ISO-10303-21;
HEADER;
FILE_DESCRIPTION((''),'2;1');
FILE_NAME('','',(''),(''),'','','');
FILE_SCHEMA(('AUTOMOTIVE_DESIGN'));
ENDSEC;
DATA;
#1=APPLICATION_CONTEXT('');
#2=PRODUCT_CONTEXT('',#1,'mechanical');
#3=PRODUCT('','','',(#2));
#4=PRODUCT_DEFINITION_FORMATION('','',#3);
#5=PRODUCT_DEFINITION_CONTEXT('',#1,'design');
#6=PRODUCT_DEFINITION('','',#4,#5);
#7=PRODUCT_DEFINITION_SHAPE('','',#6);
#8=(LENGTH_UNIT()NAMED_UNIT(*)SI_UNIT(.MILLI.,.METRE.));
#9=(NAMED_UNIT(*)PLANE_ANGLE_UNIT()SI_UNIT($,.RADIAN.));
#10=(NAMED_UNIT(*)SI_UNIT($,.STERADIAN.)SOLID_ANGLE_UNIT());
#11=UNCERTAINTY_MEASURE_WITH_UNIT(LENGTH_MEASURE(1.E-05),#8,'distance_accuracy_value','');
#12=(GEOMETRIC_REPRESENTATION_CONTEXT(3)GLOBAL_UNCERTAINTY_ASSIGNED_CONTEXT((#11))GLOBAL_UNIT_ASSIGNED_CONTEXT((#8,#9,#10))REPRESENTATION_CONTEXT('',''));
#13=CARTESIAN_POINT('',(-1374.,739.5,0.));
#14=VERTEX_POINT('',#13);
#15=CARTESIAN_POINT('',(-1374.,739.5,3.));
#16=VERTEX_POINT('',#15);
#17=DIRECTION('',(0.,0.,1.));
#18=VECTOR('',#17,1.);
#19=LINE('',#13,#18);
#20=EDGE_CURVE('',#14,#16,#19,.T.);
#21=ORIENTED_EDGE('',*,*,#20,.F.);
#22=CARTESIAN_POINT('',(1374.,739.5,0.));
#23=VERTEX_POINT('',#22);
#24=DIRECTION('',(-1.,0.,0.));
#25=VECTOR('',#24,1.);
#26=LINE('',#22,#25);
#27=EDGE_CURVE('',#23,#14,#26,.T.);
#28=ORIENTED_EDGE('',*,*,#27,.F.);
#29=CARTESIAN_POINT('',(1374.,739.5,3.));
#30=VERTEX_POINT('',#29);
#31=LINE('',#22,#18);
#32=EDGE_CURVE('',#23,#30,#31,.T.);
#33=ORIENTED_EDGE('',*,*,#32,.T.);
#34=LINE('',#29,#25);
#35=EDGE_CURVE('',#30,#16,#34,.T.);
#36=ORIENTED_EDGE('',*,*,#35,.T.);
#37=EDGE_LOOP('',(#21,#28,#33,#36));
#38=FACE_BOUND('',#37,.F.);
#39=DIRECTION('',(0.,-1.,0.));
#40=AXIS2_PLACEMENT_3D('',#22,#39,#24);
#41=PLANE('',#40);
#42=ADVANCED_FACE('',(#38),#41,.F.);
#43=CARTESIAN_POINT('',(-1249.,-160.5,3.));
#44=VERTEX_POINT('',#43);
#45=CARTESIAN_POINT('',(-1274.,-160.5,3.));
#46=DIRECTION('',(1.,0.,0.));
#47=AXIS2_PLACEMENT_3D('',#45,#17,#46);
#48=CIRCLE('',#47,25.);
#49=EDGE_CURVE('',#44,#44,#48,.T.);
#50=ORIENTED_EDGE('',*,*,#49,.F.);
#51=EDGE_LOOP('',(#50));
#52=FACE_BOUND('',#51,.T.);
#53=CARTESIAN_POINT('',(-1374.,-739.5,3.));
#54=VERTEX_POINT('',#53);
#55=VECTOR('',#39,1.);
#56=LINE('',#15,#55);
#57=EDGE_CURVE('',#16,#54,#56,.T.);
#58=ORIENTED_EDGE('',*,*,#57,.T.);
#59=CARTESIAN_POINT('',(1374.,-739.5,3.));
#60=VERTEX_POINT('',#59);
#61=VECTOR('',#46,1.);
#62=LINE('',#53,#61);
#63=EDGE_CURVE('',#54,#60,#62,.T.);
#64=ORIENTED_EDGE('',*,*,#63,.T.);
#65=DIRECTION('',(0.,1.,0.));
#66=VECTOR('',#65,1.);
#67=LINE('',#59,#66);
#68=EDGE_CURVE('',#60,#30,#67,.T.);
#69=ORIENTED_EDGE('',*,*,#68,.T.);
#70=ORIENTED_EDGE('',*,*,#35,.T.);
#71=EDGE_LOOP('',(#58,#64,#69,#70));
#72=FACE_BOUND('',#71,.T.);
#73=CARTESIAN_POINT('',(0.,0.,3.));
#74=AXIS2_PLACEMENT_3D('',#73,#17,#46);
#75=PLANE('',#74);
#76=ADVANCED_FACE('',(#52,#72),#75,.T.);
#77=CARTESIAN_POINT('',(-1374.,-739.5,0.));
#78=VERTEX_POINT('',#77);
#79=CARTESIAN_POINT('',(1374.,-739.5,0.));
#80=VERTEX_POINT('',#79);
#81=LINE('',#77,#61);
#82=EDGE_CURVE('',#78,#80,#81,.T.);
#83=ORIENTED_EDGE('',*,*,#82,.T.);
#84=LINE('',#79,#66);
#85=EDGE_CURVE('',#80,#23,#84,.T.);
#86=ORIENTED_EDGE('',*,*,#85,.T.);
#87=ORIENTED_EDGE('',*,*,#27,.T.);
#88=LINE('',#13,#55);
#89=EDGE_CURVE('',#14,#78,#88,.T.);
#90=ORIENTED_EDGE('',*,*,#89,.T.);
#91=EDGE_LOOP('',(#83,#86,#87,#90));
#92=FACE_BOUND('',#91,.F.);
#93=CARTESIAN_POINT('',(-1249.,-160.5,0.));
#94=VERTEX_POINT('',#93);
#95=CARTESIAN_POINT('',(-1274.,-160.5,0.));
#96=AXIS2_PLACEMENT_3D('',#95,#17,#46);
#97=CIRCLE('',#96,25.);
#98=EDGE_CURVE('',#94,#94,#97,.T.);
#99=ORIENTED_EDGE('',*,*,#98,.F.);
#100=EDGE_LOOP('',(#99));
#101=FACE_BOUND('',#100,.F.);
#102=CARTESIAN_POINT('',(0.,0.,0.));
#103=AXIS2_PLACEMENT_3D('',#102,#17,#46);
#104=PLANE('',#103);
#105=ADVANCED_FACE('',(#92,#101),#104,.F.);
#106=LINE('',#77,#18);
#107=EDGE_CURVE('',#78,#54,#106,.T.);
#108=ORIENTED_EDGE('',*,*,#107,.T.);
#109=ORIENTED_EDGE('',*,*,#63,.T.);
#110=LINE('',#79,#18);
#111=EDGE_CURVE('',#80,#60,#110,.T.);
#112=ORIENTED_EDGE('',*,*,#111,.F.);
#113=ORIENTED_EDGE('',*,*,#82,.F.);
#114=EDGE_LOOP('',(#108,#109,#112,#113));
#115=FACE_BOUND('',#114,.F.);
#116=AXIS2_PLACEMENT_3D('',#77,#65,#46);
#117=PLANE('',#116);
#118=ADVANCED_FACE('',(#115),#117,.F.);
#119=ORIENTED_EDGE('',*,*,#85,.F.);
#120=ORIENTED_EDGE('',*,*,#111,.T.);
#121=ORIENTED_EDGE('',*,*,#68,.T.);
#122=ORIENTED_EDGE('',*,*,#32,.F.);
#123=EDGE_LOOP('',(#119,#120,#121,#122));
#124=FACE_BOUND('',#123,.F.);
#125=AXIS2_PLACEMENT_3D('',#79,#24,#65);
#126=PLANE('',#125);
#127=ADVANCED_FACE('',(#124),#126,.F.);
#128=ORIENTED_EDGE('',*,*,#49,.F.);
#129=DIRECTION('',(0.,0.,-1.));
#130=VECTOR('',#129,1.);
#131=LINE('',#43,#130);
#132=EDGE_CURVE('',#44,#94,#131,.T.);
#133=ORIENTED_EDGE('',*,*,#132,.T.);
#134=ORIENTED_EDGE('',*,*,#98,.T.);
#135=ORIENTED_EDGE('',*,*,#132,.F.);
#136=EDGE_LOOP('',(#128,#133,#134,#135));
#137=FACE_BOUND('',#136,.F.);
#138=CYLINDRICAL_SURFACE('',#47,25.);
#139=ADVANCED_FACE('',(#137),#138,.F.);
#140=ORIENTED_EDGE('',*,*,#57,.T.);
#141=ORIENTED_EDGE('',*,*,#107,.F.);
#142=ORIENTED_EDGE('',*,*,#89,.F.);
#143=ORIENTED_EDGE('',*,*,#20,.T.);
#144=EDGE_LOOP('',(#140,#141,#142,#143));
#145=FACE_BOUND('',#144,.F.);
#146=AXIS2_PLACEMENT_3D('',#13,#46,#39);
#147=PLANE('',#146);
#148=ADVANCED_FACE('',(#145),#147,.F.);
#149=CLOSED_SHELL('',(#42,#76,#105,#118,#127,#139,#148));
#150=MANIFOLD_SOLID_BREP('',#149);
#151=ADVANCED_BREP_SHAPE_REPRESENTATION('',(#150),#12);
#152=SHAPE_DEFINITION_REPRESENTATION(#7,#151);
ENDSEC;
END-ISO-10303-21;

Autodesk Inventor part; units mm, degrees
ref_plane "YZ Plane" through (0, 0, 0) normal (1, 0, 0) x (0, 1, 0)
ref_plane "XZ Plane" through (0, 0, 0) normal (0, 1, 0) x (-1, 0, 0)
ref_plane "XY Plane" through (0, 0, 0) normal (0, 0, 1) x (1, 0, 0)
sketch "Sketch1" plane through (0, 0, 0) normal (0, 0, 1) x (1, 0, 0)
  line L0 (-1374, -739.5) -> (1374, -739.5)
  line L1 (1374, -739.5) -> (1374, 739.5)
  line L2 (1374, 739.5) -> (-1374, 739.5)
  line L3 (-1374, 739.5) -> (-1374, -739.5)
  line L4 (-1374, -739.5) -> (1374, 739.5) construction
  line L5 (1374, -739.5) -> (-1374, 739.5) construction
  point P0 (0, 0)
  dimension "d0" = 2748
  dimension "d1" = 1479
extrude "Plate1" add sketch "Sketch1" along normal blind 3
sketch "Sketch5" plane through (0, 0, 3) normal (0, 0, 1) x (1, 0, 0)
  line L0 (1349, 714.5) -> (1349, 514.5) construction
  line L1 (1349, 514.5) -> (1334, 514.5) construction
  line L2 (1334, 514.5) -> (1334, 714.5) construction
  line L3 (1334, 714.5) -> (1349, 714.5) construction
  line L4 (1374, 739.5) -> (1374, -739.5) projected
  line L5 (-1374, 739.5) -> (1374, 739.5) projected
  point P0 (0, 0)
  dimension "d26" = 200
  dimension "d27" = 15
  dimension "d28" = 25
  dimension "d29" = 25
mark "Mark1"
sketch "Sketch6" plane through (-1374, -739.5, 3) normal (0, 0, 1) x (1, 0, 0)
  circle A0 centre (100, 579) radius 25
  line L0 (0, 1479) -> (2748, 1479) projected
  line L1 (0, 0) -> (0, 1479) projected
  point P0 (1374, 739.5)
  dimension "d30" = 50
  dimension "d31" = 900
  dimension "d32" = 100
extrude "Extrusion2" cut sketch "Sketch6" against normal up to surface (3 mm away)
equation "\"d2\" = Thickness"
equation "\"BendReliefWidth\" = Thickness"
equation "\"BendReliefDepth\" = 0.5 * Thickness"
equation "\"CornerReliefSize\" = 4 * Thickness"
equation "\"MinimumRemnant\" = 2 * Thickness"
equation "\"TransitionRadius\" = BendRadius"
equation "\"JacobiRadiusSize\" = BendRadius"
equation "\"GapSize\" = Thickness"
equation "\"Thickness\" = 3"
equation "\"BendRadius\" = 5"
properties part number "BSH 043 board" material "09g2s"
